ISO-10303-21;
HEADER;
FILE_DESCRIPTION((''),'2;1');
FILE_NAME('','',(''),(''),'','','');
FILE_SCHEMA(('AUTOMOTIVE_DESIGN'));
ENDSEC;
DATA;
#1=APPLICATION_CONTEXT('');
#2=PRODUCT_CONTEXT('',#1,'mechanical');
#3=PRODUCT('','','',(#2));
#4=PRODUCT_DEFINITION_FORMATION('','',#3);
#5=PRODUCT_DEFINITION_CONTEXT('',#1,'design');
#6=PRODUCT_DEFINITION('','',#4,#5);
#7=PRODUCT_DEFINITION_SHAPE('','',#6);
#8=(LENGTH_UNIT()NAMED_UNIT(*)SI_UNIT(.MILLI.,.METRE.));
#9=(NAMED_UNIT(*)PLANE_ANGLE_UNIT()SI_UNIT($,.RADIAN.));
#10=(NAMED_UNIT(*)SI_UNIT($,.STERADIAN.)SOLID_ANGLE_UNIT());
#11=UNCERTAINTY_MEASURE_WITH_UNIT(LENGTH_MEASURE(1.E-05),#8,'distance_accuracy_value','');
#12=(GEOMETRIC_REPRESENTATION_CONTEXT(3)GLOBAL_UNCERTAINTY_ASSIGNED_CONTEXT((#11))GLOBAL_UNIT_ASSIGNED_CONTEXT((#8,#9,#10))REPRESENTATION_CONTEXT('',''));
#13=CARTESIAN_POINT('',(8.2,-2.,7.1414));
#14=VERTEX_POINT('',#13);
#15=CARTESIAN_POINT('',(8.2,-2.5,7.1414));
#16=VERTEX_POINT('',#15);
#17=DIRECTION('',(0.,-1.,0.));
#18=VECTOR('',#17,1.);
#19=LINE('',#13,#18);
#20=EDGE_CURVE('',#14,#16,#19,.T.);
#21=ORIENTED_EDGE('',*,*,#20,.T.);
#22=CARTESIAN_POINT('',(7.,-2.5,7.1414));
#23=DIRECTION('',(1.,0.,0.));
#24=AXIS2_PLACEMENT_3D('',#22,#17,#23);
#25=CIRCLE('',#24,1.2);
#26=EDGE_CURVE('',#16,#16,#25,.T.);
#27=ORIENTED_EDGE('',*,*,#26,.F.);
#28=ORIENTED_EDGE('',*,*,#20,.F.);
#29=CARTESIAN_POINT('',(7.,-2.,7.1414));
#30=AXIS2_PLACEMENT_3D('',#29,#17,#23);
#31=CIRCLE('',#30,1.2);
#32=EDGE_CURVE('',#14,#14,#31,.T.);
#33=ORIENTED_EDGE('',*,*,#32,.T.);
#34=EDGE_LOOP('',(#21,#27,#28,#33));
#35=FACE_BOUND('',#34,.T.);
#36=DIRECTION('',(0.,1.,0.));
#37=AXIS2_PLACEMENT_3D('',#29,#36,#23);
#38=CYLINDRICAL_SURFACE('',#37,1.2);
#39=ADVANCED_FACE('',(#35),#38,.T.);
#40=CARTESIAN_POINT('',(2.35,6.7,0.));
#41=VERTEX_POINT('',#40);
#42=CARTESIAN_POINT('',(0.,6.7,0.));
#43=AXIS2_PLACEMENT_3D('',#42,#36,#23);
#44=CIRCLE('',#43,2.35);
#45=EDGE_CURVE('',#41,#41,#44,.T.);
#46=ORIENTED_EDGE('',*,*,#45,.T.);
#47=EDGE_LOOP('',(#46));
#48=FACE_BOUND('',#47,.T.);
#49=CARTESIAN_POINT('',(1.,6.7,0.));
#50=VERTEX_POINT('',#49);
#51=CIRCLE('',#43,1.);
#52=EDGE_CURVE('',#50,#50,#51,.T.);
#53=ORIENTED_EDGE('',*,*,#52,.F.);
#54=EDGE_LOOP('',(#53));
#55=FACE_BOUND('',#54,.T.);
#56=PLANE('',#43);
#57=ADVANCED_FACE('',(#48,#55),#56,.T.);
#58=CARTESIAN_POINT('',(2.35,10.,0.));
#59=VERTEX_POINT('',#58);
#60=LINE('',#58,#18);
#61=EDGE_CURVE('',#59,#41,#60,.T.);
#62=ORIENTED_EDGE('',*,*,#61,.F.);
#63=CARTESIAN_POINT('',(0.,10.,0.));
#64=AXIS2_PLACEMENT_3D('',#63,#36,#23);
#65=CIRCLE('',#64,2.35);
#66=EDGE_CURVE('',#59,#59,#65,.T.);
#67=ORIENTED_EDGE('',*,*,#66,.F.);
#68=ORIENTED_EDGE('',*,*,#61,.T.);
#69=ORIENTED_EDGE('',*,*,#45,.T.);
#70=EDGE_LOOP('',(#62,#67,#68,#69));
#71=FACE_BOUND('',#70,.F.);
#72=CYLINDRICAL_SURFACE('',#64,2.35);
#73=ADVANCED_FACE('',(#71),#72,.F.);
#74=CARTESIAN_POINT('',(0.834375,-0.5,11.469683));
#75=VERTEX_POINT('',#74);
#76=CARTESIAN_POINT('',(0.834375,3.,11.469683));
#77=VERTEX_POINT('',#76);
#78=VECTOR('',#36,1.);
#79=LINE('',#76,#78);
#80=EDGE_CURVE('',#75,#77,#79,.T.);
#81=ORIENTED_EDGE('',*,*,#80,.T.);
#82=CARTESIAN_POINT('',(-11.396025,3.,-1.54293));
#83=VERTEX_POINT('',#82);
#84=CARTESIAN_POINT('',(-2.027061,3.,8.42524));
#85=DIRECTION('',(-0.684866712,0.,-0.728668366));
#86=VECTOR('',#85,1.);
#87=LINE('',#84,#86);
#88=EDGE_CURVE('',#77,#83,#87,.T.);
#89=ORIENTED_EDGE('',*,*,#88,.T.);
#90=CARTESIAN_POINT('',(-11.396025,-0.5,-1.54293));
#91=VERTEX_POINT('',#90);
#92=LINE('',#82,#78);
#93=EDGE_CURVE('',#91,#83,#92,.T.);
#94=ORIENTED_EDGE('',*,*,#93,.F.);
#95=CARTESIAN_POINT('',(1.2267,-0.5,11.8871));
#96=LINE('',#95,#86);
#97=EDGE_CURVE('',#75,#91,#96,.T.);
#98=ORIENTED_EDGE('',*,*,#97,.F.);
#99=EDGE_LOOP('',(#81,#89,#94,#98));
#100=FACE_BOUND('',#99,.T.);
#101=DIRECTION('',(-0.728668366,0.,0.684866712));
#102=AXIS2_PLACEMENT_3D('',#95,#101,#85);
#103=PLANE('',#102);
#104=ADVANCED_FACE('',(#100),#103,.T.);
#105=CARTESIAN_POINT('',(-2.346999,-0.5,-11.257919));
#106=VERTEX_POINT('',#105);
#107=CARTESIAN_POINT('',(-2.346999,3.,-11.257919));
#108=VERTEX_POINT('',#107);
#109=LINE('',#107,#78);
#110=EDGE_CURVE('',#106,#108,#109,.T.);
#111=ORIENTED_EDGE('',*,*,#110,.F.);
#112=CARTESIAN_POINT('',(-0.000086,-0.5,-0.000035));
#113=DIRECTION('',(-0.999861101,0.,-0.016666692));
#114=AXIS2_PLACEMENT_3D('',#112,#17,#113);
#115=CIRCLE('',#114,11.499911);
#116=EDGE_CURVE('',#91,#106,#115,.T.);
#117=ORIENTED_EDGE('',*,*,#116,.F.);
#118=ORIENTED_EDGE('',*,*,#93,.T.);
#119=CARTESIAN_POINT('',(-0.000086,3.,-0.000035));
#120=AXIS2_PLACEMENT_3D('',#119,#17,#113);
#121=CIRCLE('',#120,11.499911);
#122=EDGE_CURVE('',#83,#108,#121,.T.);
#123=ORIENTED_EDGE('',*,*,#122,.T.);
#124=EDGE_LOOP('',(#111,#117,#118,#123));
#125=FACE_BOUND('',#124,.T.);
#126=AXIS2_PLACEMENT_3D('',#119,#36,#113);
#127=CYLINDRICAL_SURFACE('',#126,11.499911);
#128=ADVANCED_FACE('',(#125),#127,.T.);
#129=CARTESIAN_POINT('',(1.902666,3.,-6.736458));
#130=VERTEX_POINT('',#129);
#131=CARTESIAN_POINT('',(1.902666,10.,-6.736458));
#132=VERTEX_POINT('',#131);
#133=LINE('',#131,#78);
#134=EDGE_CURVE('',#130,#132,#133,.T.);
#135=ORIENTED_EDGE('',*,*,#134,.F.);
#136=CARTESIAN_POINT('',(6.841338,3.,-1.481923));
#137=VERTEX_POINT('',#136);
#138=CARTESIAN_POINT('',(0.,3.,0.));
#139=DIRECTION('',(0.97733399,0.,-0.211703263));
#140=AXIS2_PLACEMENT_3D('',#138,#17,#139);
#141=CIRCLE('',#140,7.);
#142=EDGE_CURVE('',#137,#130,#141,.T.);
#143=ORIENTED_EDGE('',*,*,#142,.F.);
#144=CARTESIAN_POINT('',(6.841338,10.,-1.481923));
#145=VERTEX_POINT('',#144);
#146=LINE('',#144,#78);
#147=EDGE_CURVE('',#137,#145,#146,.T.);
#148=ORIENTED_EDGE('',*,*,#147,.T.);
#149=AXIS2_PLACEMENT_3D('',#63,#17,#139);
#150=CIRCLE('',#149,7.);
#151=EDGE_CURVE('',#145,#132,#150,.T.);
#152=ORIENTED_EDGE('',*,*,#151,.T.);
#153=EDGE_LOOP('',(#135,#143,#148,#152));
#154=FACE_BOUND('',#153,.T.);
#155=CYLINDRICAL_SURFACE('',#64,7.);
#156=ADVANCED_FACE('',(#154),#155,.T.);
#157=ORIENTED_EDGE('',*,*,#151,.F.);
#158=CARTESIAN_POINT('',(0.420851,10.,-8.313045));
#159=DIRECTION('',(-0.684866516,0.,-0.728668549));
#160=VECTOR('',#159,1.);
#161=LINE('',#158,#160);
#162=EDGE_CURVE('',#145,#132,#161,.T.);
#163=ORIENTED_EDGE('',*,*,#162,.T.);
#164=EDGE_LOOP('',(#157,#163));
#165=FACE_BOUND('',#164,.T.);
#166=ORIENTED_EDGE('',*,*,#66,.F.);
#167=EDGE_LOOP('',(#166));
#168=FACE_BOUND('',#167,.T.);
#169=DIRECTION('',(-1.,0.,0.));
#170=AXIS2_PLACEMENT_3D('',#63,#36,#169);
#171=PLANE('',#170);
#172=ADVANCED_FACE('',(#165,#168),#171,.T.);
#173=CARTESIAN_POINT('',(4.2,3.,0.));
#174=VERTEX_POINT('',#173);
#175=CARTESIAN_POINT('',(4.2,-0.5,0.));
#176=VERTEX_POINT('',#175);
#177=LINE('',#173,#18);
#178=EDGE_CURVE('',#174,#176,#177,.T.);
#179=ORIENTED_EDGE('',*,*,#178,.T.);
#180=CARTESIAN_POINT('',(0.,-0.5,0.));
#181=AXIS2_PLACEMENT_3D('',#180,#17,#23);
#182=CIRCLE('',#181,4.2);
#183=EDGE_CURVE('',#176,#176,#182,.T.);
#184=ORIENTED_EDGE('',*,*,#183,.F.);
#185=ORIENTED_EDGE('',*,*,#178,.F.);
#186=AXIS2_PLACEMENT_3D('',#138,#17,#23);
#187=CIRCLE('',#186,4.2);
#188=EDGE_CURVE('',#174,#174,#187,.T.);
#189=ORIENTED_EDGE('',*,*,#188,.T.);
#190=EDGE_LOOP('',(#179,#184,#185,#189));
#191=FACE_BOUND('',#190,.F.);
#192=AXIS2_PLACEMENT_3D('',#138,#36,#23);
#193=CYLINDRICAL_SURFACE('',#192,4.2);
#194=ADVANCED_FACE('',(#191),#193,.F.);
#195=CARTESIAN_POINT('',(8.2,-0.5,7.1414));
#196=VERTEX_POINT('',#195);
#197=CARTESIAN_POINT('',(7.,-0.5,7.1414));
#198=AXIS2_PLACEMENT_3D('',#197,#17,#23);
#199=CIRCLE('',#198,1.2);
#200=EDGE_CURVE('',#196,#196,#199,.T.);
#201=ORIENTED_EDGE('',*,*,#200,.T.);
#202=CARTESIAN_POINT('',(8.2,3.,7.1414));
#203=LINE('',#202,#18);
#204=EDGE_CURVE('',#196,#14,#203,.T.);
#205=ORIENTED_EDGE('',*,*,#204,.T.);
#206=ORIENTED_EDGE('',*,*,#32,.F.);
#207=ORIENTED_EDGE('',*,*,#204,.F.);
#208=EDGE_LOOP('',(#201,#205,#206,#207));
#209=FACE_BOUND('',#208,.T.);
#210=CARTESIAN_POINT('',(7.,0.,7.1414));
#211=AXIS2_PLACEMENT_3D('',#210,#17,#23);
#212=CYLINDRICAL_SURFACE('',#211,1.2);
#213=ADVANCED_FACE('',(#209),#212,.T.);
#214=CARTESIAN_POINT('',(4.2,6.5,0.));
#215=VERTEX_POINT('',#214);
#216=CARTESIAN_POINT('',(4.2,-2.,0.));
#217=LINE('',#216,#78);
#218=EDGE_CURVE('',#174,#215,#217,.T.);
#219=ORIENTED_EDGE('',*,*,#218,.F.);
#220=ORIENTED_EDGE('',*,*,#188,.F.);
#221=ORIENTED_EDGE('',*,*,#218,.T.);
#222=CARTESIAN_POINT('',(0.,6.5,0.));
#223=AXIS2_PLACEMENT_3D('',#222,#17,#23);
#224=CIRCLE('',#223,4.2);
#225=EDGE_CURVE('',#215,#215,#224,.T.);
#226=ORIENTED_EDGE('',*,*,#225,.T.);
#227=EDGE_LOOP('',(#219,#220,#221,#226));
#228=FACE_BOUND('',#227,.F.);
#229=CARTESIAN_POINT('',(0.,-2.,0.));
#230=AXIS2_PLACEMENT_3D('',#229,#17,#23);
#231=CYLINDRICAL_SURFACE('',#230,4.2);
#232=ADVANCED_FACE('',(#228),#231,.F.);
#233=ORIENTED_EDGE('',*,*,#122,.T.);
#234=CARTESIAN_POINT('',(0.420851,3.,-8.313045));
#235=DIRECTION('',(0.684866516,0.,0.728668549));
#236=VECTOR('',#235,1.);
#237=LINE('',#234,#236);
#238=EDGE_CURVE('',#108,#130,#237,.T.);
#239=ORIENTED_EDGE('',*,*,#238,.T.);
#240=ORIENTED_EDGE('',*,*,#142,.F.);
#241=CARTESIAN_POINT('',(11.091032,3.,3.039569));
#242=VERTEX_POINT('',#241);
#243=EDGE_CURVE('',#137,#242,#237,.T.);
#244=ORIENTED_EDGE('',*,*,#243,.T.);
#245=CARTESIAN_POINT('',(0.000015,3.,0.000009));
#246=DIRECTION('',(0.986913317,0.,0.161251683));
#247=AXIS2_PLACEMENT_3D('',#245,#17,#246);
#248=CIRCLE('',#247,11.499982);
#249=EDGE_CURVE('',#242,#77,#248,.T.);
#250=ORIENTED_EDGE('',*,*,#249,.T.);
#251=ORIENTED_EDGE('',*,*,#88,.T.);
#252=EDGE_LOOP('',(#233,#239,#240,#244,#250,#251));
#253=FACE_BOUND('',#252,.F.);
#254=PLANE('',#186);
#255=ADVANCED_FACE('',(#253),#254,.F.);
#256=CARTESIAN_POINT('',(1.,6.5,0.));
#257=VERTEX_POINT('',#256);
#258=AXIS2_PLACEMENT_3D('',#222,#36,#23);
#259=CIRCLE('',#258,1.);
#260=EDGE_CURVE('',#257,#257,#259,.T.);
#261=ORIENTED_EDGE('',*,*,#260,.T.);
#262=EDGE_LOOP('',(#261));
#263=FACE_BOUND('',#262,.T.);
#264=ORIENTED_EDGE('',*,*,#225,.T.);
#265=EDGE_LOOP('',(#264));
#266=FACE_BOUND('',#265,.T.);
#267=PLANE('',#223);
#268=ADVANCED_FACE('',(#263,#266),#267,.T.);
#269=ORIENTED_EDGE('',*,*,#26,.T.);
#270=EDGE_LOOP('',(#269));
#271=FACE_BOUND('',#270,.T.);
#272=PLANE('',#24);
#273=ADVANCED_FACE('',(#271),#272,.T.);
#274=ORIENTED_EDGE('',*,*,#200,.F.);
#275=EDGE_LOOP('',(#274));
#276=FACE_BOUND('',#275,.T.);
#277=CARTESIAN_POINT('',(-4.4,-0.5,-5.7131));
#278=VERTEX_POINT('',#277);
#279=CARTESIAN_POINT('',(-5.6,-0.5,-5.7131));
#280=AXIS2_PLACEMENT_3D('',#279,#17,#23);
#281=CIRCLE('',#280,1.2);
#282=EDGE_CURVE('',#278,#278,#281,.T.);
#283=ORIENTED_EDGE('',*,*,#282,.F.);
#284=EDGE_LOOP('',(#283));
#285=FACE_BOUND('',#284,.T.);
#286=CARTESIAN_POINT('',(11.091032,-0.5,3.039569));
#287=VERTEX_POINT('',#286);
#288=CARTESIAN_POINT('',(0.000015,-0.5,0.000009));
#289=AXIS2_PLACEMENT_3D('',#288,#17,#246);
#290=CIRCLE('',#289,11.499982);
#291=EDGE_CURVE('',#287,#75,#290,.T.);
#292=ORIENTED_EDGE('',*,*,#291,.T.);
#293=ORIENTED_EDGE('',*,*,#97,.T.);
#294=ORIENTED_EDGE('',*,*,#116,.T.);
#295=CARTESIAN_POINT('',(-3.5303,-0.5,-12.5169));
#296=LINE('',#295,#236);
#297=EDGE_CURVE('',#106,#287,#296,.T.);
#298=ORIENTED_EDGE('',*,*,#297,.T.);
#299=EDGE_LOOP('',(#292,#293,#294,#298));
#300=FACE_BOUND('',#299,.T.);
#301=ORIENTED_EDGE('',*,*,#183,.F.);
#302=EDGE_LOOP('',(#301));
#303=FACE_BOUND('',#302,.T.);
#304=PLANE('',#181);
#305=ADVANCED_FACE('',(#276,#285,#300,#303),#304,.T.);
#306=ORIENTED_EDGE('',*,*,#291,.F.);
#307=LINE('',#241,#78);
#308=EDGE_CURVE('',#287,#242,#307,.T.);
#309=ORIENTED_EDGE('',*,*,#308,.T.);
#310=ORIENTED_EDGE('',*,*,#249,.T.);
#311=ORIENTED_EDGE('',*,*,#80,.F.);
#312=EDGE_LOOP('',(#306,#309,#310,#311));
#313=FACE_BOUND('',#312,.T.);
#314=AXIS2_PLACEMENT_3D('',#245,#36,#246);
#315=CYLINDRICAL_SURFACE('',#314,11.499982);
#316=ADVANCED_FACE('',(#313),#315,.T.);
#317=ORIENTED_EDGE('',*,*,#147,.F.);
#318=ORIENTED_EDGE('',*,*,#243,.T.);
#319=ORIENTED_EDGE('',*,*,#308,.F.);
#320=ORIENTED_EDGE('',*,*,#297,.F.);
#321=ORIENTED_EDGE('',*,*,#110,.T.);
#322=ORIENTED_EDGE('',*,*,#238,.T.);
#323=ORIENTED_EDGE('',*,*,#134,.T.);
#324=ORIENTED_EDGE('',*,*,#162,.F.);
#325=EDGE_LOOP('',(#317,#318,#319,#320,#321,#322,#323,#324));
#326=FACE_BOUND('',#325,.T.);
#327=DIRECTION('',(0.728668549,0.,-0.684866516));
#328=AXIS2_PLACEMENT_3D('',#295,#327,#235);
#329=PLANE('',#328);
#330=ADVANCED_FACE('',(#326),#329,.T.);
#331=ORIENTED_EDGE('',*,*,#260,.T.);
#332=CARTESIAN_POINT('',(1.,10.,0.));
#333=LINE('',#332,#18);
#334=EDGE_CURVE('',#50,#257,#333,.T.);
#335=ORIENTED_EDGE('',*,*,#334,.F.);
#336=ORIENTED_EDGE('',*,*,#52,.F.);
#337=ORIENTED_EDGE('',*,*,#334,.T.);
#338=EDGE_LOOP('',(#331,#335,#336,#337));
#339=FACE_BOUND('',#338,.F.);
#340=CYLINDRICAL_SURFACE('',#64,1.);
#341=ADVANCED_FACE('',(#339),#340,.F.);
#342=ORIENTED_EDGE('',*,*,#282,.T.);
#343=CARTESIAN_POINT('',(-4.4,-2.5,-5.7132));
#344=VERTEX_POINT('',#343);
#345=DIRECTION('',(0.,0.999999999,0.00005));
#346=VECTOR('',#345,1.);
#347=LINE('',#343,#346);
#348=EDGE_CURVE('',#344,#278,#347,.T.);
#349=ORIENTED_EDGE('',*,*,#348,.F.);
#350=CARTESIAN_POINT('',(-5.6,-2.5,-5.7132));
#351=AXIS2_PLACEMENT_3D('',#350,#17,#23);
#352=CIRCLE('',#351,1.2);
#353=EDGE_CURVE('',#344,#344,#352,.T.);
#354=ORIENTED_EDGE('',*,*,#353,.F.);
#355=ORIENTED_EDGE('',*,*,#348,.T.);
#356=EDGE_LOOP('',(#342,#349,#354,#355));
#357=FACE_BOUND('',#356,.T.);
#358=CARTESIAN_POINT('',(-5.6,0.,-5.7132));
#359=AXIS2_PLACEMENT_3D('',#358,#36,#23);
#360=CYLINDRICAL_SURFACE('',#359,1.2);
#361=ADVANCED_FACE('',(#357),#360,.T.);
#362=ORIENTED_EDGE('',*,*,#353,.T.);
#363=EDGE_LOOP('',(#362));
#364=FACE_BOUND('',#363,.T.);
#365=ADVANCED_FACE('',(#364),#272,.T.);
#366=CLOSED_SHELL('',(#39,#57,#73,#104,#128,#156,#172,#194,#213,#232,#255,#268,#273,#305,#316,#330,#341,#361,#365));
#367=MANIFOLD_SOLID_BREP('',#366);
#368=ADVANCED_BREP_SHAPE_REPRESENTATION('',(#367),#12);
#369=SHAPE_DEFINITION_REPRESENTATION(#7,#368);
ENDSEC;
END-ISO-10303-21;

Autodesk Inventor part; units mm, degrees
ref_plane "YZ Plane" through (0, 0, 0) normal (1, 0, 0) x (0, 1, 0)
ref_plane "XZ Plane" through (0, 0, 0) normal (0, 1, 0) x (-1, 0, 0)
ref_plane "XY Plane" through (0, 0, 0) normal (0, 0, 1) x (1, 0, 0)
sketch "Skizze1" plane through (0, 0, 0) normal (0, 1, 0) x (-1, 0, 0)
  circle A0 centre (0, 0) radius 15
  dimension "d0" = 30
extrude "Extrusion1" add sketch "Skizze1" along normal blind 10
sketch "Skizze2" plane through (0, 0, 0) normal (0, -1, 0) x (1, 0, 0)
  line L0 (14.3188, 0.9) -> (12.9688, 0.9)
  line L1 (12.9688, -0.9) -> (14.3188, -0.9)
  line L2 (14.3188, -0.9) -> (14.3188, 0.9)
  line L3 (-21.3175, 0) -> (21.3175, 0) projected
  arc A0 (12.9688, 0.9) -> (0.9, 12.9688) centre (0, 0) ccw
  line L4 (-0.9, -12.9688) -> (-0.9, -14.3188)
  line L5 (-0.9, -14.3188) -> (0.9, -14.3188)
  line L6 (0.9, -14.3188) -> (0.9, -12.9688)
  line L7 (-12.9688, 0.9) -> (-14.3188, 0.9)
  line L8 (-14.3188, 0.9) -> (-14.3188, -0.9)
  line L9 (-14.3188, -0.9) -> (-12.9688, -0.9)
  line L10 (-0.9, 12.9688) -> (-0.9, 14.3188)
  line L11 (-0.9, 14.3188) -> (0.9, 14.3188)
  line L12 (0.9, 14.3188) -> (0.9, 12.9688)
  line L13 (0, -21.3175) -> (0, 21.3175) projected
  line L14 (-21.3175, 0) -> (21.3175, 0) projected
  arc A1 (0.9, -12.9688) -> (12.9688, -0.9) centre (0, 0) ccw
  arc A2 (-12.9688, -0.9) -> (-0.9, -12.9688) centre (0, 0) ccw
  arc A3 (-0.9, 12.9688) -> (-12.9688, 0.9) centre (0, 0) ccw
  circle A4 centre (0, 0) radius 4.2
  circle A5 centre (7, 7.1414) radius 1.2
  circle A6 centre (-5.6, -5.7131) radius 1.2
  dimension "d4" = 0.9
  dimension "d5" = 0.9
  dimension "d8" = 1.35
  dimension "d9" = 1.35
  dimension "d10" = 1.8
  dimension "d11" = 0.9
  dimension "d12" = 1.35
  dimension "d13" = 1.8
  dimension "d14" = 0.9
  dimension "d15" = 0.9
  dimension "d16" = 1.35
  dimension "d17" = 8.4
  dimension "d18" = 2.4
  dimension "d19" = 2.4
  dimension "d20" = 8
  dimension "d21" = 10
  dimension "d22" = 7
  dimension "d23" = 5.6
  dimension "d50" = 13
  dimension "d51" = 13
  dimension "d52" = 1.35
  dimension "d53" = 1.35
  dimension "d54" = 1.35
extrude "Extrusion2" cut sketch "Skizze2" against normal blind 3 contours L2 L3 A4 L13 L11 L12 A0 L0 | L2 L1 A1 L6 L5 L13 A4 L3 | A4 L3 L8 L7 A3 L10 L11 L13 | L13 L5 L4 A2 L9 L8 L3 A4
sketch "Skizze4" plane through (7, 0, 7.1414) normal (0, -1, 0) x (1, 0, 0)
  circle A0 centre (-7, -7.1414) radius 4.2
  circle A1 centre (-12.6, -12.8546) radius 1.2
  circle A2 centre (0, 0) radius 1.2
  line L0 (-7, -28.1414) -> (-7, 13.8586) projected
  dimension "d26" = 2.4
  dimension "d27" = 5.6
  dimension "d28" = 8
  dimension "d44" = 8.4
  dimension "d45" = 2.4
extrude "Extrusion3" add sketch "Skizze4" along normal blind 2
sketch "Skizze5" plane through (0, 10, 0) normal (0, 1, 0) x (1, 0, 0)
  circle A0 centre (0, 0) radius 19.262
  circle A1 centre (0, 0) radius 7
  dimension "d31" = 14
extrude "Extrusion4" cut sketch "Skizze5" against normal blind 7
fillet "Rundung1" radius 1 8 edges at (12.9688, 1.5, -0.9) (12.9688, 1.5, 0.9) (0.9, 1.5, -12.9688) (-0.9, 1.5, -12.9688) (-12.9688, 1.5, -0.9) (-12.9688, 1.5, 0.9) (-0.9, 1.5, 12.9688) (0.9, 1.5, 12.9688)
sketch "Skizze8" plane through (0, 10, 0) normal (0, 1, 0) x (1, 0, 0)
  circle A0 centre (0, 0) radius 1
  dimension "d46" = 2
extrude "Extrusion7" cut sketch "Skizze8" against normal blind 7
sketch "Skizze9" plane through (0, -2, 0) normal (0, -1, 0) x (1, 0, 0)
  line L0 (18.2687, 9.2162) -> (-7.478, -18.1772)
  line L1 (-7.478, -18.1772) -> (18.2687, -18.1772)
  line L2 (18.2687, -18.1772) -> (18.2687, 9.2162)
  line L3 (8.0673, 18.8043) -> (-17.6793, -8.5891)
  line L4 (-17.6793, -8.5891) -> (-17.6793, 18.8043)
  line L5 (-17.6793, 18.8043) -> (8.0673, 18.8043)
  point P0 (0, 0)
  dimension "d55" = 7
  dimension "d56" = 7
extrude "Extrusion8" cut sketch "Skizze9" against normal blind 50
sketch "Skizze10" plane through (0, -2, 0) normal (0, -1, 0) x (1, 0, 0)
  circle A0 centre (0, 0) radius 11.5
  circle A1 centre (0, 0) radius 18.9246
  dimension "d61" = 23
extrude "Extrusion9" cut sketch "Skizze10" against normal blind 10
sketch "Skizze11" plane through (0, -2, 0) normal (0, -1, 0) x (1, 0, 0)
  circle A0 centre (0, 0) radius 1 projected
  circle A1 centre (0, 0) radius 4.2
extrude "Extrusion10" cut sketch "Skizze11" against normal blind 8.5 contours A0 | A1
sketch "Skizze13" plane through (0, 3, 0) normal (0, -1, 0) x (1, 0, 0)
  circle A0 centre (7, 7.1414) radius 1.2 projected
  circle A1 centre (7, 7.1414) radius 1.2
  circle A2 centre (-5.6, -5.7131) radius 1.2 projected
  circle A3 centre (-5.6, -5.7131) radius 1.2
  arc A4 (11.3495, 1.8544) -> (-0.5206, 11.4882) centre (0, 0) ccw
  line L0 (11.3495, 1.8544) -> (8.9749, -0.6721) projected
  line L1 (11.3495, 1.8544) -> (-1.1481, -11.4425)
  line L2 (-0.5206, 11.4882) -> (-11.4984, -0.1917)
  line L3 (1.2265, -8.916) -> (-1.1481, -11.4425) projected
  arc A5 (-11.4984, -0.1917) -> (-1.1481, -11.4425) centre (0, 0) ccw
  circle A6 centre (0, 0) radius 4.2
extrude "Extrusion11" add sketch "Skizze13" along normal blind 3.5
sketch "Skizze14" plane through (7, -2, 7.1414) normal (0, -1, 0) x (1, 0, 0)
  circle A0 centre (0, 0) radius 1.2 projected
  circle A1 centre (0, 0) radius 1.2
  circle A2 centre (-12.6, -12.8546) radius 1.2 projected
  circle A3 centre (-12.6, -12.8546) radius 1.2
  point P0 (-7, -7.1414)
extrude "Extrusion12" add sketch "Skizze14" along normal blind 0.5
sketch "Skizze15" plane through (0, 10, 0) normal (0, 1, 0) x (1, 0, 0)
  circle A0 centre (0, 0) radius 1 projected
  circle A1 centre (0, 0) radius 2.35
  dimension "d68" = 4.7
extrude "Extrusion13" cut sketch "Skizze15" against normal blind 3.3 contours A0 | A1
sketch "Skizze17" plane through (0, -0.5, 0) normal (0, -1, 0) x (1, 0, 0)
  line L0 (1.2267, 11.8871) -> (-14.9812, -5.3574)
  line L1 (-0.5206, 11.4882) -> (-11.4984, -0.1917) projected
  line L2 (-14.9812, -5.3574) -> (-14.9812, 19.8141)
  line L3 (-14.9812, 19.8141) -> (1.2267, 11.8871)
  line L4 (-3.5303, -12.5169) -> (12.8557, 4.9171)
  line L5 (-1.1481, -11.4425) -> (5.1007, -4.7941) projected
  line L6 (12.8557, 4.9171) -> (12.8557, -12.5169)
  line L7 (12.8557, -12.5169) -> (-3.5303, -12.5169)
  point P0 (0, 0)
  point P1 (-5.1007, 4.7941)
  point P2 (-11.4984, -0.1917)
  dimension "d71" = 1
  dimension "d72" = 1
extrude "Extrusion14" cut sketch "Skizze17" against normal blind 15
properties part number "Adaptation_on_OPdevside_4_2"
